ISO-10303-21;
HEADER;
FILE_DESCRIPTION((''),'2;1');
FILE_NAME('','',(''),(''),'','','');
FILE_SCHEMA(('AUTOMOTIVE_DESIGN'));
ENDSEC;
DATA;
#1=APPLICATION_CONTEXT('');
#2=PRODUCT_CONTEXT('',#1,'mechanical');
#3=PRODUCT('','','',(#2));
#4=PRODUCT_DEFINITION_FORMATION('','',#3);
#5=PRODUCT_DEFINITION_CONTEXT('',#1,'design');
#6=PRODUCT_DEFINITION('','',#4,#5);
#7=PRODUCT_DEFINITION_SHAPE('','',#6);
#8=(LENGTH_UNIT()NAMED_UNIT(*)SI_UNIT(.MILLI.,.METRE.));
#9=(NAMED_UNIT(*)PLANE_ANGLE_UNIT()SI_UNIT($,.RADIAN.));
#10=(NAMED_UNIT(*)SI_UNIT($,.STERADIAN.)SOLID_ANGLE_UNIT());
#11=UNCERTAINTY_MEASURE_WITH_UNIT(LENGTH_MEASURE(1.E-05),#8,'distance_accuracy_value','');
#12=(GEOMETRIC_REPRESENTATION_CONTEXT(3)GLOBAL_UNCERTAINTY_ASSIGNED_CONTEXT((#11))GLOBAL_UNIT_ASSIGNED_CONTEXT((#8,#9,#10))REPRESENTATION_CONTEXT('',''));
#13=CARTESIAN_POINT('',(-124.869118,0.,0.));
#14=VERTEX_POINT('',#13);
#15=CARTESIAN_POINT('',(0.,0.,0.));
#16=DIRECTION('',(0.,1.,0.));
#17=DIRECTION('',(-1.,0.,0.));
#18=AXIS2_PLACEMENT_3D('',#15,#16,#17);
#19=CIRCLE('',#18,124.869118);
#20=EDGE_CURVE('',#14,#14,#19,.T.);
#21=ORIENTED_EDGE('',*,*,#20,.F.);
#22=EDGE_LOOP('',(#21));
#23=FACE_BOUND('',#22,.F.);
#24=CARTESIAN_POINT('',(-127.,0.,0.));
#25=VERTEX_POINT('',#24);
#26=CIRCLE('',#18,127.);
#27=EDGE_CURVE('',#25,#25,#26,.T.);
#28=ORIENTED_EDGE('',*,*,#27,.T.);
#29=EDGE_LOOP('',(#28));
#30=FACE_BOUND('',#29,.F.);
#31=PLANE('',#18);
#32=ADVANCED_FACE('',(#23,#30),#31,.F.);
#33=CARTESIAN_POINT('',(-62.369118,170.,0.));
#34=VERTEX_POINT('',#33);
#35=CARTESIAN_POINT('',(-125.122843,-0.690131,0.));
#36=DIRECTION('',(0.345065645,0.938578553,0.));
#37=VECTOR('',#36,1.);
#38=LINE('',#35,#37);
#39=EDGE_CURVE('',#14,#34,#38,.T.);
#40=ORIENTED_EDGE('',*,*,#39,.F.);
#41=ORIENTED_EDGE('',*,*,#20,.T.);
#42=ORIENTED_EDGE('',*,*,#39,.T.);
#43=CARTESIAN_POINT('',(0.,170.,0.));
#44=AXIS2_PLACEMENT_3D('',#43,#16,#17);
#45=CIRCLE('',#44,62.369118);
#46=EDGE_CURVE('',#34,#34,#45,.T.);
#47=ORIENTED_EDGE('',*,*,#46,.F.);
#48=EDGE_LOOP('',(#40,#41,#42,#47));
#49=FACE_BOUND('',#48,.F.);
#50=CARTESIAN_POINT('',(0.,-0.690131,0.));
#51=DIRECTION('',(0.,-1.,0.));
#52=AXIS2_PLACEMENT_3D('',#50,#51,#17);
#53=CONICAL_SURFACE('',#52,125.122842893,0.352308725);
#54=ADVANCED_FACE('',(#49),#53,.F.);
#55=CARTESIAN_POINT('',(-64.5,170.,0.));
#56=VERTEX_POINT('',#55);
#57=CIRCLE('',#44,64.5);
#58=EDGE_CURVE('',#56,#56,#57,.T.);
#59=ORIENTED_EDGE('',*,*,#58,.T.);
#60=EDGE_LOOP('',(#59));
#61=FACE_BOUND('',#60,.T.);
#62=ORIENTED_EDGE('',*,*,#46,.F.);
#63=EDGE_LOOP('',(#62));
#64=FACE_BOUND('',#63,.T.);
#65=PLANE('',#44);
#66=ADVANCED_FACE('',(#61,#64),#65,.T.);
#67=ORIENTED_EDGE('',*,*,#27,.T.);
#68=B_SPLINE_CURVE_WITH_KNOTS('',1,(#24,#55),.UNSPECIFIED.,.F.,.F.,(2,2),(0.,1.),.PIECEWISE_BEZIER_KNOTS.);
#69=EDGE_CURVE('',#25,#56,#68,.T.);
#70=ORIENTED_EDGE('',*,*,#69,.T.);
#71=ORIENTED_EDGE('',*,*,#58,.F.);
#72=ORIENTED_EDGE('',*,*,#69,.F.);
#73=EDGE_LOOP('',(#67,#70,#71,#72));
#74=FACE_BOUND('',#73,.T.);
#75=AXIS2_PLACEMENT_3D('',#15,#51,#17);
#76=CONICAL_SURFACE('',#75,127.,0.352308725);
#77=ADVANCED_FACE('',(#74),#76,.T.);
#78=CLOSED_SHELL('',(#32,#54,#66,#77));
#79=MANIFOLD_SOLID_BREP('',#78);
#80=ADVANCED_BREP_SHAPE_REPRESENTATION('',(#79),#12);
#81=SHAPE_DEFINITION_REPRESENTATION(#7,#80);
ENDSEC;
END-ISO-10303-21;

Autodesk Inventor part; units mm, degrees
ref_plane "YZ Plane" through (0, 0, 0) normal (1, 0, 0) x (0, 1, 0)
ref_plane "XY Plane" through (0, 0, 0) normal (0, 0, 1) x (1, 0, 0)
sketch "Szkic6" plane through (0, 0, 0) normal (0, 1, 0) x (-1, 0, 0)
  circle A0 centre (0, 0) radius 127
  dimension "d33" = 254
ref_plane "Płaszczyzna konstrukcyjna1" through (0, 170, 0) normal (0, 1, 0) x (-1, 0, 0)
sketch "Szkic7" plane through (0, 170, 0) normal (0, 1, 0) x (-1, 0, 0)
  circle A0 centre (0, 0) radius 64.5
  dimension "d35" = 129
loft "Wyciągnięcie złożone1" add profiles "Szkic6", "Szkic7"
shell "Skorupa1" thickness 2 removed faces 2 at (8.6004, 170, -5.9504) at (-5.9373, 0, -40.5182)
equation "\"d33\" = OD1"
equation "\"d35\" = OD2"
equation "\"d52\" = THK"
equation "\"SzerokośćGięciaPodcięcia\" = Grubość"
equation "\"RozmiarPodcięciaNarożnika\" = 4 * Grubość"
equation "\"PromieńPrzejścia\" = PromieńGięcia"
equation "\"Rozmiar_promienia_Jacobiego\" = PromieńGięcia"
equation "\"Wielk_odstępu\" = Grubość"
equation "\"d2\" = PromieńGięcia"
equation "\"d23\" = PromieńGięcia"
equation "\"OD1\" = 254"
equation "\"OD2\" = 129"
equation "\"THK\" = 2"
equation "\"Grubość\" = 1.5"
equation "\"PromieńGięcia\" = 3"
properties part number "Redukcja symetryczna Ø254x129x2 L=170" material "304"
